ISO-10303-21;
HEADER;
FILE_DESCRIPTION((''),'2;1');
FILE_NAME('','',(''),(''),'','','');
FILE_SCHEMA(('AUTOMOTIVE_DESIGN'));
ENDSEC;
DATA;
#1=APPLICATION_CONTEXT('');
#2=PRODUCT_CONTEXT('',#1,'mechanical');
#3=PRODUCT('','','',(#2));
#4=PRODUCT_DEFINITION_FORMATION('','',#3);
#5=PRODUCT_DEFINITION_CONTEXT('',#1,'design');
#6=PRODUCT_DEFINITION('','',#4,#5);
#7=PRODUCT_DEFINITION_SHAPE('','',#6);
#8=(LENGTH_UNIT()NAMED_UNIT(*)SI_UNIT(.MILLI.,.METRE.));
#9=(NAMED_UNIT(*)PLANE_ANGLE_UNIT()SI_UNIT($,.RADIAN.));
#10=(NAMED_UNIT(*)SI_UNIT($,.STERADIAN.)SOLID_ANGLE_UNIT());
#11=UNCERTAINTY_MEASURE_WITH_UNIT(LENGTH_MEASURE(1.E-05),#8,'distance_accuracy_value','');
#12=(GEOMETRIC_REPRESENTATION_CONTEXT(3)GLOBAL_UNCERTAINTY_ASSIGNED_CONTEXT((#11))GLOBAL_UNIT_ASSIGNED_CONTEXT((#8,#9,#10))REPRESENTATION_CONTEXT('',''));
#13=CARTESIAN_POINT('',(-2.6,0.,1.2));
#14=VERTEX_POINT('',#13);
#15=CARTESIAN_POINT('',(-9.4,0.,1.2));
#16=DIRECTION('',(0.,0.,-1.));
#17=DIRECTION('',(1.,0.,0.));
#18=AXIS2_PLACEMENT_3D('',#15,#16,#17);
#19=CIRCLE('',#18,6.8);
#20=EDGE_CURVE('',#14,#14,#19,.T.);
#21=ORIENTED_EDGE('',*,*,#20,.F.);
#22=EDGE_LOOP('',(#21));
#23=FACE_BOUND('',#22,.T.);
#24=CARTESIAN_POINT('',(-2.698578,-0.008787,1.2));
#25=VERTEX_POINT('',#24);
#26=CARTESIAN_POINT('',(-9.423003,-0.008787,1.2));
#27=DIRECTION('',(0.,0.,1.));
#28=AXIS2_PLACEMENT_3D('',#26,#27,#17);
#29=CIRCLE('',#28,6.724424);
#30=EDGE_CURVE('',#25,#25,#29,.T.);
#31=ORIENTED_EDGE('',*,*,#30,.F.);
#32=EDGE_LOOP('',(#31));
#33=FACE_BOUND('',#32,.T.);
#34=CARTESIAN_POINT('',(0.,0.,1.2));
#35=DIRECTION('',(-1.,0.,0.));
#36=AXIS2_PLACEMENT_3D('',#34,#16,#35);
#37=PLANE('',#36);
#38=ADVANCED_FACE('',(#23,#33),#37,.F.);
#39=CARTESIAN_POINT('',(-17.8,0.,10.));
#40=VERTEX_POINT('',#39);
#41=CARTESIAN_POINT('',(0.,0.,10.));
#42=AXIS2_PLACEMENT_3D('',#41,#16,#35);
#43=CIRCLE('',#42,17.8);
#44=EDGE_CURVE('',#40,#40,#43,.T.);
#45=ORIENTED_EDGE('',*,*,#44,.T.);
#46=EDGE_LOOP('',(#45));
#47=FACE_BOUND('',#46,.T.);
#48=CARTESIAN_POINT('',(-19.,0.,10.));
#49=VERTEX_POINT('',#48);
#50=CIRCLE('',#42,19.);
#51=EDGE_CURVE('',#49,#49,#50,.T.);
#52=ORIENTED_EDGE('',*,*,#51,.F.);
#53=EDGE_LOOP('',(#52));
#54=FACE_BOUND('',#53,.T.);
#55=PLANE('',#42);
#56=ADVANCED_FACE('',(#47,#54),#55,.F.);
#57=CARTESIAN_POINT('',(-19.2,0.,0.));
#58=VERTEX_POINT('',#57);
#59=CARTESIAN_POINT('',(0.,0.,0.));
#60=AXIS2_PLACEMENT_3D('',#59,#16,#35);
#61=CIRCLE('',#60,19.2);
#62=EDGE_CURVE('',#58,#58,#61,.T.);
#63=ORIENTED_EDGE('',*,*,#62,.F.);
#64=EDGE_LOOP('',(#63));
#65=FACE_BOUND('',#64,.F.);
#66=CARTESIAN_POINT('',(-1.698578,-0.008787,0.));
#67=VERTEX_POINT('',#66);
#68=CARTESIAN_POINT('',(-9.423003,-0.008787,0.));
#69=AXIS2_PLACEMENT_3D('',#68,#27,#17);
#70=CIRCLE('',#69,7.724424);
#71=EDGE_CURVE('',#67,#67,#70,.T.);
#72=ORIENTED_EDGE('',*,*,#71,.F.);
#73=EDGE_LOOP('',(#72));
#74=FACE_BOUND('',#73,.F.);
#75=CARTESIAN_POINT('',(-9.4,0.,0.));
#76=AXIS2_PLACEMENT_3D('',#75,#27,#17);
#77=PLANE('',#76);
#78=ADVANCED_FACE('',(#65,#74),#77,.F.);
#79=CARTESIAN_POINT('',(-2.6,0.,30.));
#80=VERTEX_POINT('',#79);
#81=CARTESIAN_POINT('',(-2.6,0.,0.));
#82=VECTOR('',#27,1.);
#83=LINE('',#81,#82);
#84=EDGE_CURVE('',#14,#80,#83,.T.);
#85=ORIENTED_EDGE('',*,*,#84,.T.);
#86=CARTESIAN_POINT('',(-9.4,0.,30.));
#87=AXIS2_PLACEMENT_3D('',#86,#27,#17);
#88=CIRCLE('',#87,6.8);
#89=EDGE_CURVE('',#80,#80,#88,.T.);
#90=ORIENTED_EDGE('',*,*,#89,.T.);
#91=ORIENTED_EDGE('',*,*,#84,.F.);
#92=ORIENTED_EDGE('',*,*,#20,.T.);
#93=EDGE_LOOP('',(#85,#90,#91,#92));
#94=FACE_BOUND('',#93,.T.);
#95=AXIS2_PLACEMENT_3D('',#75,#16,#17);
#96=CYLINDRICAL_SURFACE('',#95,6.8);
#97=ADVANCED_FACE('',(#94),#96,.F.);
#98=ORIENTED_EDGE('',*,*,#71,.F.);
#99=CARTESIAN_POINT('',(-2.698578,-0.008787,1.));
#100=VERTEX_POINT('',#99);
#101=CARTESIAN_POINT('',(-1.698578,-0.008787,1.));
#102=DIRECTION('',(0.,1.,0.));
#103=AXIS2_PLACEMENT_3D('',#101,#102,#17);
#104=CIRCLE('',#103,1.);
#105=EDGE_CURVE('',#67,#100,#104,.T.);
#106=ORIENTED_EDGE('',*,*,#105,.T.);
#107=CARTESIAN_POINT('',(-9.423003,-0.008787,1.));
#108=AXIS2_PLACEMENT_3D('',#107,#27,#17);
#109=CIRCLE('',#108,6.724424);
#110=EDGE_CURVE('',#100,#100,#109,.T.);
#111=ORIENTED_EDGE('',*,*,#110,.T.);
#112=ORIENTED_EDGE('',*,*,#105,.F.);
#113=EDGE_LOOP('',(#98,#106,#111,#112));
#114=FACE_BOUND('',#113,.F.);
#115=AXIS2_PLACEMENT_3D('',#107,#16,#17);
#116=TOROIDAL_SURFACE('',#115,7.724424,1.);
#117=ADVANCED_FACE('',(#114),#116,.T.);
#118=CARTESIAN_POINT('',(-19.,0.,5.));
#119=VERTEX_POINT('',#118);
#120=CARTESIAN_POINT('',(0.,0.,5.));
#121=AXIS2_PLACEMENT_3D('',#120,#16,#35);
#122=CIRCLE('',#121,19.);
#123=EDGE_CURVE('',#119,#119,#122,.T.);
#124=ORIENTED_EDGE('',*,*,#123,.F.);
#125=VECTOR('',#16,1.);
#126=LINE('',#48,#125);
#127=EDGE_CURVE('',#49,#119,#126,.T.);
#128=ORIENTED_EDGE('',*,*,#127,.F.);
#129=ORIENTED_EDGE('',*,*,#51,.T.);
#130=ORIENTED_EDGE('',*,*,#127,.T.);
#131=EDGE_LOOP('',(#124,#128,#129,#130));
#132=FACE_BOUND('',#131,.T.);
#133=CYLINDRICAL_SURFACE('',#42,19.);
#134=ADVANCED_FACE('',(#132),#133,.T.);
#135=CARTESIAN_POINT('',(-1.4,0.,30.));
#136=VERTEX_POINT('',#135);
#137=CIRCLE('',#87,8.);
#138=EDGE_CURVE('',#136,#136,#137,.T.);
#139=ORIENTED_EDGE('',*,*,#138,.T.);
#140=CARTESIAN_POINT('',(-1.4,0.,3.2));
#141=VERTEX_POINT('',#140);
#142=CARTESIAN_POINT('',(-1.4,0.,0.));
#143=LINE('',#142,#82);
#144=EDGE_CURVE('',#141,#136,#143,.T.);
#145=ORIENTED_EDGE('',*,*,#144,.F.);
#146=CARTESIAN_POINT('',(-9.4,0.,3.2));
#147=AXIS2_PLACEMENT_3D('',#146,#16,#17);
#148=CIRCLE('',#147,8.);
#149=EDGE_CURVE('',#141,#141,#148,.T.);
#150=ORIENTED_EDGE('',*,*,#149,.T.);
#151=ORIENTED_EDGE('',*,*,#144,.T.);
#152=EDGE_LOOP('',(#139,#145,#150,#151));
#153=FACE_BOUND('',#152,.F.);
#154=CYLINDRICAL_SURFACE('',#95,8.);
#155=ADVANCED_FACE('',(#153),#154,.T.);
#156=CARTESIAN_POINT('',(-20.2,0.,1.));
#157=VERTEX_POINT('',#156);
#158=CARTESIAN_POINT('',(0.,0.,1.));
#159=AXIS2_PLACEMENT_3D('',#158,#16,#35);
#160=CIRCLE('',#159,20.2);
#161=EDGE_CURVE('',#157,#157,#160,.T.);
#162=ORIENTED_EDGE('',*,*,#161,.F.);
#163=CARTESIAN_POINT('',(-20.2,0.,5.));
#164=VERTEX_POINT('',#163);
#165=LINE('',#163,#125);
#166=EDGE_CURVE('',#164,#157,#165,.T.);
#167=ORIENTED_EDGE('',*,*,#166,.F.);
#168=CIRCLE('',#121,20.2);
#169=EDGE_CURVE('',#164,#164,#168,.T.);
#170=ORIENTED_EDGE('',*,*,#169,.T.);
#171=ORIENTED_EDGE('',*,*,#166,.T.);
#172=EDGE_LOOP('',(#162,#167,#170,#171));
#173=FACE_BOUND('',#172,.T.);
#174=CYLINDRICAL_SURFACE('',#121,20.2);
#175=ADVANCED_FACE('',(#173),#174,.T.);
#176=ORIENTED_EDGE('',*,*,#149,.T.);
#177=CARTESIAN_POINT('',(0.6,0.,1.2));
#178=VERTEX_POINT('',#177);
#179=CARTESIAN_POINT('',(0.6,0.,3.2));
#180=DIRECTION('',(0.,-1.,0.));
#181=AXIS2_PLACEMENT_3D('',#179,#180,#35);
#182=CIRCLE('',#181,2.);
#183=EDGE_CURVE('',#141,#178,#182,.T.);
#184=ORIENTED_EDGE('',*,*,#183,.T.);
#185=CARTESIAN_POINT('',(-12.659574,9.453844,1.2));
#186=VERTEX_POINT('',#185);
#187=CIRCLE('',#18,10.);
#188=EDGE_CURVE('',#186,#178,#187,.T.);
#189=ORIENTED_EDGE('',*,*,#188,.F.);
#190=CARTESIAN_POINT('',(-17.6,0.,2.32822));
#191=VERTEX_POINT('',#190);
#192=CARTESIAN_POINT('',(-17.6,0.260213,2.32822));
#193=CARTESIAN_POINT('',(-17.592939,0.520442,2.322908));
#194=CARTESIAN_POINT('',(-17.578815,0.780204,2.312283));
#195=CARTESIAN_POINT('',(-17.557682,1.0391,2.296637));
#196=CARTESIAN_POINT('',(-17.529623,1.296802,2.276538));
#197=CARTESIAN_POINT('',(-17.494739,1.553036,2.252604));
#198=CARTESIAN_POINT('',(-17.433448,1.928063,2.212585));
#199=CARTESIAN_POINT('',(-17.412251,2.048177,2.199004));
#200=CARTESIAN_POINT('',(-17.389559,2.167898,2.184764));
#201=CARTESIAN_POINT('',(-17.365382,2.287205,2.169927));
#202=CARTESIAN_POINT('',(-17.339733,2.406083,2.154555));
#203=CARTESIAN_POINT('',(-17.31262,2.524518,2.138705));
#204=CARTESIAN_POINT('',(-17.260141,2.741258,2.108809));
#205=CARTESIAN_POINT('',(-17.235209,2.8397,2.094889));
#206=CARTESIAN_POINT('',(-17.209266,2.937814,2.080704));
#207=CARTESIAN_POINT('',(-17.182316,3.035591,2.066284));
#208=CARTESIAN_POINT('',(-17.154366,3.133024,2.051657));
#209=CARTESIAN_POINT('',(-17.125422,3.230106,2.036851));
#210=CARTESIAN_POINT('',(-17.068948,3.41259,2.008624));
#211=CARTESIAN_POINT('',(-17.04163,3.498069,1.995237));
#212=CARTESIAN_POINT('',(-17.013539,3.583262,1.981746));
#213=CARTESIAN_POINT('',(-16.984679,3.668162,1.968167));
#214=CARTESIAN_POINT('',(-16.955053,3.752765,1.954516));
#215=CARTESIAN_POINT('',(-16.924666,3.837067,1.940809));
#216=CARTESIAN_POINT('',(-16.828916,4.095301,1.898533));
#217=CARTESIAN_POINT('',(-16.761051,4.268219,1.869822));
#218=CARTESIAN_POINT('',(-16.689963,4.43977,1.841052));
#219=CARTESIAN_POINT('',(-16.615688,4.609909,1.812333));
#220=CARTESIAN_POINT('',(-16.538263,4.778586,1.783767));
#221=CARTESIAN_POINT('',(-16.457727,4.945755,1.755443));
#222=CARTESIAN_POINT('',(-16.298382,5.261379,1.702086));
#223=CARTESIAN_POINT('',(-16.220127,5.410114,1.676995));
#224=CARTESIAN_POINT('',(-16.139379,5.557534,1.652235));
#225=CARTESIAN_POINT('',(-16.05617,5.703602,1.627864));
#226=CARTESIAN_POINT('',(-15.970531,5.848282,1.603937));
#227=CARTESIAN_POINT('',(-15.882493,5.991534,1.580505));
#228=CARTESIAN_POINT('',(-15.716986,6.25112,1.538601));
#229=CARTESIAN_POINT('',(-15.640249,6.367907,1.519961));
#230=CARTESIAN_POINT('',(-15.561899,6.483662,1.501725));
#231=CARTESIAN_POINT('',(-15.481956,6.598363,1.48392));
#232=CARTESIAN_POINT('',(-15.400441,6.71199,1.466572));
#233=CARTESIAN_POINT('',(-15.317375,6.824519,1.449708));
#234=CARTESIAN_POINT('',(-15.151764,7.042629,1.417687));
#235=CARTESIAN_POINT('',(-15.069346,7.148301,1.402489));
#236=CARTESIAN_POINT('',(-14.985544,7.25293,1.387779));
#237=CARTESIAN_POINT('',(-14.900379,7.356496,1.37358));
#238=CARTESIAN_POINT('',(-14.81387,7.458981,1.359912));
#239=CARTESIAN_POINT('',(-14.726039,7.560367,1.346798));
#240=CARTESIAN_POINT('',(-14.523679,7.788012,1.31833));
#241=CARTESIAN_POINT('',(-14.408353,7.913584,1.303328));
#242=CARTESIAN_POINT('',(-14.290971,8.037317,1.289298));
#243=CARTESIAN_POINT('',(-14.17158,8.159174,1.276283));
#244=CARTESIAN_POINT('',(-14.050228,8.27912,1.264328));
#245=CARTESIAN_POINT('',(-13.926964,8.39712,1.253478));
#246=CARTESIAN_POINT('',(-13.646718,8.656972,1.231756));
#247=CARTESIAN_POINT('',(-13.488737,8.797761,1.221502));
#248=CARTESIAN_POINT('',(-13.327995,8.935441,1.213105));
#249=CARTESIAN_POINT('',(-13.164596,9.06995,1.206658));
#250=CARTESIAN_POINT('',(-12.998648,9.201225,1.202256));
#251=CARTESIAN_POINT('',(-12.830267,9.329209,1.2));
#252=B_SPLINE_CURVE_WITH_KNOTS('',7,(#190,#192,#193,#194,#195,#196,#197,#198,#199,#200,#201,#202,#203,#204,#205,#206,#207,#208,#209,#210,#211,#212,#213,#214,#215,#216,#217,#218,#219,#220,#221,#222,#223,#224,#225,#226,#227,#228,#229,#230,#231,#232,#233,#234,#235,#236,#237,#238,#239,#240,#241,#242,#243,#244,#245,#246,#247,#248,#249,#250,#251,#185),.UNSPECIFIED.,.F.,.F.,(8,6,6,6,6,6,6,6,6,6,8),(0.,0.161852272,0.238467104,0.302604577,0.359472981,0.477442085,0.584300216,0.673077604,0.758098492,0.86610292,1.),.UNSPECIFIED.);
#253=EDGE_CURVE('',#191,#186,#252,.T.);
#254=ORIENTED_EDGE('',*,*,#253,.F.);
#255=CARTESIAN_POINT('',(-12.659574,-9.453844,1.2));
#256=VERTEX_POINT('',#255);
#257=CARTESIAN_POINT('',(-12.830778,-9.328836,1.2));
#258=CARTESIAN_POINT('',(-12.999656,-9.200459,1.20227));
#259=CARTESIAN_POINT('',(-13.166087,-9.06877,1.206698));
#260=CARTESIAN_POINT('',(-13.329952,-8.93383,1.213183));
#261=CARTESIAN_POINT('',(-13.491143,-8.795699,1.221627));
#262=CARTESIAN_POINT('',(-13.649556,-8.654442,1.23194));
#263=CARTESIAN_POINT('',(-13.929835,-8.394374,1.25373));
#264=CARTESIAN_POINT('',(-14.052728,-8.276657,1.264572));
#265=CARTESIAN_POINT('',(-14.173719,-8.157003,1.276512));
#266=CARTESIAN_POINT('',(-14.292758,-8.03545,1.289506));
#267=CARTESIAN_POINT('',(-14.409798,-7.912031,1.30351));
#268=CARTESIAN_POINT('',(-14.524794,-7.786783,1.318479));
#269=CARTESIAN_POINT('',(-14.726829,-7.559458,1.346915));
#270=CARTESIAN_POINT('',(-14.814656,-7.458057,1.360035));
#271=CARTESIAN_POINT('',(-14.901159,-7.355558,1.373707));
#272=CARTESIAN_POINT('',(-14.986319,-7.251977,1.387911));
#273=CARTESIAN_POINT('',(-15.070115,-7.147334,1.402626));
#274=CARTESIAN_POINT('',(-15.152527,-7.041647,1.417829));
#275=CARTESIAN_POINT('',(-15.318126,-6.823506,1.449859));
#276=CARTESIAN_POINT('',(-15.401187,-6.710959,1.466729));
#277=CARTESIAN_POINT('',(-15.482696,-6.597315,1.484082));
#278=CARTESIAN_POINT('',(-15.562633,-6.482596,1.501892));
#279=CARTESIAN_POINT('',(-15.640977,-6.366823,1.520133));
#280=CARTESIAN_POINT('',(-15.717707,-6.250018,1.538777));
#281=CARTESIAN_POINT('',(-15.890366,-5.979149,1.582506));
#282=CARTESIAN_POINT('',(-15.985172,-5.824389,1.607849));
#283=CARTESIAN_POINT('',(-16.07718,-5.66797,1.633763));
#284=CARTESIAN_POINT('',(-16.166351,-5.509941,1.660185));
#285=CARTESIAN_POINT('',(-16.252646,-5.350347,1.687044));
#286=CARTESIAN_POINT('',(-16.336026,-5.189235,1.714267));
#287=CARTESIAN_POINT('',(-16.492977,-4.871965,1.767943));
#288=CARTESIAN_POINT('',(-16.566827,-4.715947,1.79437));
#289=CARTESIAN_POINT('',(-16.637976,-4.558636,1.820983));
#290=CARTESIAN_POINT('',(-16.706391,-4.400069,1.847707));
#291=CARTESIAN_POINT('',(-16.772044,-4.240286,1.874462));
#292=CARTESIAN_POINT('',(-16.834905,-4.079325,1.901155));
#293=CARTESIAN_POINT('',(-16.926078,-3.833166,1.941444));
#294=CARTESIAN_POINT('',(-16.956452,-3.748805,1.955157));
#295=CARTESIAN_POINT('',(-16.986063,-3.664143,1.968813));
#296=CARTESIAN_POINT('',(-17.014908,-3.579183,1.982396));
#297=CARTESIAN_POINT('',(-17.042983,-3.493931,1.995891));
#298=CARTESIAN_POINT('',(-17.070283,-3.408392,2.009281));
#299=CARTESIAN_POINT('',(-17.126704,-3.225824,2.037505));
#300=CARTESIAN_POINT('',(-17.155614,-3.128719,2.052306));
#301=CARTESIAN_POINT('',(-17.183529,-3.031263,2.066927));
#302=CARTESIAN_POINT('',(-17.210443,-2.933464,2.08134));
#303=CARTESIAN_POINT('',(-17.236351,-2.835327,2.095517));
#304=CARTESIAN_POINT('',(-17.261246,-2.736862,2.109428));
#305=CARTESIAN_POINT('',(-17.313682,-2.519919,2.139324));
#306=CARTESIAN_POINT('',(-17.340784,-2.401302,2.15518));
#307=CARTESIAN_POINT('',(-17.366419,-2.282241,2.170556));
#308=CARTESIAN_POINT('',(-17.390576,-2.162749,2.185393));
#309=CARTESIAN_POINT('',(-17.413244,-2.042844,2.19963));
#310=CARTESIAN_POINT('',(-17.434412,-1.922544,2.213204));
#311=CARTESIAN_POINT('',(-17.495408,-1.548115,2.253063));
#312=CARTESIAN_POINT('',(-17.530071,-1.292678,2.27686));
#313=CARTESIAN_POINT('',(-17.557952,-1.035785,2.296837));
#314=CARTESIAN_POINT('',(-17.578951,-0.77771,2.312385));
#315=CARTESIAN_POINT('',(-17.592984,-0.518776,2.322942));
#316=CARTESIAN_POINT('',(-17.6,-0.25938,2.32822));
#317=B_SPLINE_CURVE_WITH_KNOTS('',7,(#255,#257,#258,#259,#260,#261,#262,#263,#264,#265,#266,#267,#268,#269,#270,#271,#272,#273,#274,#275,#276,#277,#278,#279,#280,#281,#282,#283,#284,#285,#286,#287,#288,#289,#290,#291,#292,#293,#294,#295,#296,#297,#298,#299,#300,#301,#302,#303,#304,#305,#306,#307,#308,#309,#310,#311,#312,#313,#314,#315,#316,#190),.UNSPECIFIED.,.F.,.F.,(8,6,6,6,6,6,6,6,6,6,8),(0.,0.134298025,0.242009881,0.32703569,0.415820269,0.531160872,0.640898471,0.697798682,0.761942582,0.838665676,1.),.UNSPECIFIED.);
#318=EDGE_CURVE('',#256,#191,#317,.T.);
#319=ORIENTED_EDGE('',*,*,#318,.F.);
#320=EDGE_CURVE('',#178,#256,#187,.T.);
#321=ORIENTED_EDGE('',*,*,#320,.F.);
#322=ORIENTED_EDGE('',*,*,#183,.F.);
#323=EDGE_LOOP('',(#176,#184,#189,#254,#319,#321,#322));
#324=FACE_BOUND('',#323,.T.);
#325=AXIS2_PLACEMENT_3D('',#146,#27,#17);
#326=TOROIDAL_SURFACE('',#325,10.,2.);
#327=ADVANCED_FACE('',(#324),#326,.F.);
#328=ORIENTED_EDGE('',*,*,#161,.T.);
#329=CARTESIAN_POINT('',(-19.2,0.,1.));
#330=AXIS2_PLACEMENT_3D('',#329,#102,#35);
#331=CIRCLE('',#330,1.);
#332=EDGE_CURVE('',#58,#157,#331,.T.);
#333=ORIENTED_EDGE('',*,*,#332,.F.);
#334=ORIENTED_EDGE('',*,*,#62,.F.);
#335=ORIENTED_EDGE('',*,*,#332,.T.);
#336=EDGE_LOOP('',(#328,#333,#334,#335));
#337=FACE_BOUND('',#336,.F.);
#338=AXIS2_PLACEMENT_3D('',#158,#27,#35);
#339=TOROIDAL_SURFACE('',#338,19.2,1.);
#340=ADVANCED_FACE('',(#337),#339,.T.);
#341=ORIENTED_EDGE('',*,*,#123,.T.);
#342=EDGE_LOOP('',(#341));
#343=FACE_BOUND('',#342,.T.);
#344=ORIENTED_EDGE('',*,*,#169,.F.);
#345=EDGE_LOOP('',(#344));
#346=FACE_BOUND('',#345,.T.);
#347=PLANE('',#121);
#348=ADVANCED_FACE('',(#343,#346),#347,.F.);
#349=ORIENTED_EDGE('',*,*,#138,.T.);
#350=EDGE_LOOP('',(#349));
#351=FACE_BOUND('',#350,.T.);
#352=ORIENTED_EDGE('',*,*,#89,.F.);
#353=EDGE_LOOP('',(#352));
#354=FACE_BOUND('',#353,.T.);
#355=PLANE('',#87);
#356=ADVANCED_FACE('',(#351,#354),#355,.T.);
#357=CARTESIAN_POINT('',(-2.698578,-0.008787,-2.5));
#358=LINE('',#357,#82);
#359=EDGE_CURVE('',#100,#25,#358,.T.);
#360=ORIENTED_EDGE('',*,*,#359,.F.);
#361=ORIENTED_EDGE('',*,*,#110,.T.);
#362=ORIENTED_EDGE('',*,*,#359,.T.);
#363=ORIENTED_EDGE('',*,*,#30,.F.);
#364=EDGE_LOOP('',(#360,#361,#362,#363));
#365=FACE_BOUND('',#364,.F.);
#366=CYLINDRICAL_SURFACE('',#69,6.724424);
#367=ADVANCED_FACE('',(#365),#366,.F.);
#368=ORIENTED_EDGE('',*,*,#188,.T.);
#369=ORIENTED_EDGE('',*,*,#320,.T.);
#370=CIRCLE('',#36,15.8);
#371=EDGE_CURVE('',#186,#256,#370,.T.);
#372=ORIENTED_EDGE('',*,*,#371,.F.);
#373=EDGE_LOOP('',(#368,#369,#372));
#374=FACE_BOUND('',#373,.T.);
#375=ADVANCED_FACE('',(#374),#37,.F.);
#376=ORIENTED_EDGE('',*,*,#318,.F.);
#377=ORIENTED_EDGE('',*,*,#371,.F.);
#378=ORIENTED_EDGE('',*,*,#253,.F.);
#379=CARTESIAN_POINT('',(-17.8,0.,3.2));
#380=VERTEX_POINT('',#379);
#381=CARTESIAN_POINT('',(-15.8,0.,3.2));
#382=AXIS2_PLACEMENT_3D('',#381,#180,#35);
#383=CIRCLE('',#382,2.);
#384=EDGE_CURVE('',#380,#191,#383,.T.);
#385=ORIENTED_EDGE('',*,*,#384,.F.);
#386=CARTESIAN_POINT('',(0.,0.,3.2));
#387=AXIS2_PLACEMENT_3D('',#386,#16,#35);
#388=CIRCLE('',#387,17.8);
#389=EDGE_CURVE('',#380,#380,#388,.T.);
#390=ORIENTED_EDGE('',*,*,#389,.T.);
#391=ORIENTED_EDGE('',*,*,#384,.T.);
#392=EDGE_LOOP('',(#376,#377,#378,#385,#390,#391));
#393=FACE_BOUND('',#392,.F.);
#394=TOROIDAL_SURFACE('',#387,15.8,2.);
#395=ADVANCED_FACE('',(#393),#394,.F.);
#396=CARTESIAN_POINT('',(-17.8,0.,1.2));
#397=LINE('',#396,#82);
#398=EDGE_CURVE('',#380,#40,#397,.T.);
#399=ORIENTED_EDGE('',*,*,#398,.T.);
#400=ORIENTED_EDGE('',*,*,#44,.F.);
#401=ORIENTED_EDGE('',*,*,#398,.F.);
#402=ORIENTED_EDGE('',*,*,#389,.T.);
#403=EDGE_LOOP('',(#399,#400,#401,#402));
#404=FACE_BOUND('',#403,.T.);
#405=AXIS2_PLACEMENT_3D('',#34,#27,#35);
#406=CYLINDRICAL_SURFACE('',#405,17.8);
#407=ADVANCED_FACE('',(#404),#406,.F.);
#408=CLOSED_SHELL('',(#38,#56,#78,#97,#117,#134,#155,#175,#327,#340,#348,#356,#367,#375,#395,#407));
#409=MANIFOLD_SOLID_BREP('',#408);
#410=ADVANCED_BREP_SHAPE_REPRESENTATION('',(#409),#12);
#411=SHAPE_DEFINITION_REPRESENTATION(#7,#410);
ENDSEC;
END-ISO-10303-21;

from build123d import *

# Parameters (mm, degrees)
F2_R        = 8
F2_R_2      = 6.8
F3_DEPTH    = 30
F4_R        = 6.7244244579
F5_DEPTH    = 2.5
F6_R        = 1
F7_S7_R     = 8
F7_T8_DEPTH = 29


# Not quite as in the source:
# - a fillet or chamfer that OpenCascade refuses, or shapes differently, is made with other operations: its cross-section is extruded or revolved along the edge and cut away or added


with BuildPart() as f1:
    # F0 (on Front) → F1 (revolve)
    with BuildSketch(Plane.XZ):
        Polygon((-20.2, 0), (0, 0), (0, 1.2), (-17.8, 1.2), (-17.8, 10), (-19, 10), (-19, 5), (-20.2, 5), align=None)
    revolve(axis=Axis((0, 0, 6.5113101155), (0, 0, -1)))

    # F2 (on Top) → F3 (join)
    with BuildSketch(Plane.XY):
        with Locations((-9.4, 0)):
            Circle(F2_R)
        with Locations((-9.4, 0)):
            Circle(F2_R_2, mode=Mode.SUBTRACT)
    extrude(amount=F3_DEPTH)

    # F4 (on Top) → F5 (cut, symmetric)
    with BuildSketch(Plane.XY):
        with Locations((-9.4230027523, -0.008787398)):
            Circle(F4_R)
    extrude(amount=F5_DEPTH, both=True, mode=Mode.SUBTRACT)

    # F6
    f6_edges = [f1.edges().sort_by_distance(p)[0] for p in [
        (20.2, 0, 0),
        (-16.147427, -0.008787, 0),
    ]]
    fillet(f6_edges, radius=F6_R)

    # F7: fillet of radius 2 on 2 edges, made by hand

    # F7_s1 → F7_t2 (revolve)
    with BuildSketch(Plane.XZ):
        with BuildLine():
            ThreePointArc((-1.4, 3.2), (-0.8142135624, 1.7857864376), (0.6, 1.2))
            Line((0.6, 1.2), (-1.4, 1.2))
            Line((-1.4, 1.2), (-1.4, 3.2))
        make_face()
    revolve(axis=Axis((-9.4, 0, 1.2), (0, 0, -1)))


with BuildPart() as f7_tool4:
    # F7_s5 → F7_t6 (revolve)
    with BuildSketch(Plane.XZ):
        with BuildLine():
            ThreePointArc((-17.8, 3.2), (-17.2142135624, 1.7857864376), (-15.8, 1.2))
            Line((-15.8, 1.2), (-17.8, 1.2))
            Line((-17.8, 1.2), (-17.8, 3.2))
        make_face()
    revolve(axis=Axis((0, 0, 1.2), (0, 0, -1)))

    # F7_s7 → F7_t8 (cut, symmetric)
    with BuildSketch(Plane.XY.offset(2.2)):
        with Locations((-9.4, 0)):
            Circle(F7_S7_R)
    extrude(amount=F7_T8_DEPTH, both=True, mode=Mode.SUBTRACT)


with BuildPart() as f1_1:
    add(f1.part)

    # F7_t3: union F7_tool4
    add(f7_tool4.part)


solid = f1_1.part
